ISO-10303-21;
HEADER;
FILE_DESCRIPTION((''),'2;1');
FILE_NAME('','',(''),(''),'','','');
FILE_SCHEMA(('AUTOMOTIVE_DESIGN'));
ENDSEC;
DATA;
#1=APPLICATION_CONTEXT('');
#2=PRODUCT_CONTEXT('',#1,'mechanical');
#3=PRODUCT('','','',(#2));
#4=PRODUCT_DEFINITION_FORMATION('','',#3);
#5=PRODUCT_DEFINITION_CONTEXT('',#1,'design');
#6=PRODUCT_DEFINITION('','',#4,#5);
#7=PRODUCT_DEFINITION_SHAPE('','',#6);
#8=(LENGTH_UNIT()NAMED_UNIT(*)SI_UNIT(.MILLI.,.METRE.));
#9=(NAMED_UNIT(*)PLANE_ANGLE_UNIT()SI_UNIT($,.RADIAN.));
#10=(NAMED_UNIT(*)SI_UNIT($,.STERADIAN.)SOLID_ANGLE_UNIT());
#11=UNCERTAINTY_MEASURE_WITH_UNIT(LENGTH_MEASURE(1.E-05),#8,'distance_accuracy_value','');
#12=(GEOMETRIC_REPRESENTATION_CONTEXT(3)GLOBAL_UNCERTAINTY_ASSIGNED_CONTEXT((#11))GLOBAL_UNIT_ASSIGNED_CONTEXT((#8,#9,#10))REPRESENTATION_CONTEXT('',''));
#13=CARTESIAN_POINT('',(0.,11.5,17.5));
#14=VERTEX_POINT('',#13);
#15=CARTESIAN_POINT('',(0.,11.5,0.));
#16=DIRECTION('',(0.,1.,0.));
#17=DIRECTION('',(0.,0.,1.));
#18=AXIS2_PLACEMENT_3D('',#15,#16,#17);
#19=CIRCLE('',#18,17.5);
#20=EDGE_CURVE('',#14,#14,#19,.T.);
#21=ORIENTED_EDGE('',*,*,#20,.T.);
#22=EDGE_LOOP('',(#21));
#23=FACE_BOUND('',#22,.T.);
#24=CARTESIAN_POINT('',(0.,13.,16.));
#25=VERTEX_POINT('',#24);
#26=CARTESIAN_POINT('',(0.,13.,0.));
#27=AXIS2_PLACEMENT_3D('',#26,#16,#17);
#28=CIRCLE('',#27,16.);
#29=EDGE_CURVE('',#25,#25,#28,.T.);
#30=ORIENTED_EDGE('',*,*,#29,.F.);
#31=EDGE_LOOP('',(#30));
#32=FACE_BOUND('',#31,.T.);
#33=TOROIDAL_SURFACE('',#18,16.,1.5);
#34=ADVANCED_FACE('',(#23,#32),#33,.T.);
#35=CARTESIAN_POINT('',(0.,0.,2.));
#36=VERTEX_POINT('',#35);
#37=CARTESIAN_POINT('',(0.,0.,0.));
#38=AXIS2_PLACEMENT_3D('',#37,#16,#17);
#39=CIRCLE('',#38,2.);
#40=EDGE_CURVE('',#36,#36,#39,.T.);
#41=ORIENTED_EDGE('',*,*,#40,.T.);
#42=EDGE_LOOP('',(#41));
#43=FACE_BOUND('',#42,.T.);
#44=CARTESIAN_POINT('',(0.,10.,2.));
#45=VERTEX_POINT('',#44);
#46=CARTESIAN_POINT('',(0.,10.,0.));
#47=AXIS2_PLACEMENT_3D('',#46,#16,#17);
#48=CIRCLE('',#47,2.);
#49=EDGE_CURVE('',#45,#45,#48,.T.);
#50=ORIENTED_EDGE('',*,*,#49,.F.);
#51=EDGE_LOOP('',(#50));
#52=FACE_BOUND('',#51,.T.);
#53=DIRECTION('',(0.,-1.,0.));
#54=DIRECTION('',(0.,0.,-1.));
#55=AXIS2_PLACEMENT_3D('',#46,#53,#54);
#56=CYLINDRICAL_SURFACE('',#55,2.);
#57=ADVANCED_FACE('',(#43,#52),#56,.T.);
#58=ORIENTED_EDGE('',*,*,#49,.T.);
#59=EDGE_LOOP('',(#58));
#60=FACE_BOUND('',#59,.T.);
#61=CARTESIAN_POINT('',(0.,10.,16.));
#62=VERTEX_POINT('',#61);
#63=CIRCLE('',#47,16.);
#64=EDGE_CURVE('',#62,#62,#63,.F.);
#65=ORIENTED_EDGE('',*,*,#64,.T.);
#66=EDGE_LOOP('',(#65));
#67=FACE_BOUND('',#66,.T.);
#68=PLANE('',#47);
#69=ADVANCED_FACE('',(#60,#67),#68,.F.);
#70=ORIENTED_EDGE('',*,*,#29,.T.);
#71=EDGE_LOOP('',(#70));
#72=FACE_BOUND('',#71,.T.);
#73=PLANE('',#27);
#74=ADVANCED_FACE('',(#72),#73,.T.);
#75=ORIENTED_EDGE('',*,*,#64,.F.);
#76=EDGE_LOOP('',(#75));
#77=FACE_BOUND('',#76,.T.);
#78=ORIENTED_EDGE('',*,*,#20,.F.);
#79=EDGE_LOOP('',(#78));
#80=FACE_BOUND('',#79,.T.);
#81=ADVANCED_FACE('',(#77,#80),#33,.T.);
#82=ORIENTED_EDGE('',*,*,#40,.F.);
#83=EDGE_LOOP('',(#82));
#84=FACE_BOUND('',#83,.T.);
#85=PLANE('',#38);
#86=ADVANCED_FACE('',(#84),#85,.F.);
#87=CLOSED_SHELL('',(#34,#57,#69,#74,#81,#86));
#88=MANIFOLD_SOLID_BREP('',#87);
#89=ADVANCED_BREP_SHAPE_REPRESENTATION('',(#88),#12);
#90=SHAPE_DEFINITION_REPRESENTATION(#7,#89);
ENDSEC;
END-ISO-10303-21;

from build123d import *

# Parameters (mm, degrees)
SKETCH1_R           = 2
BOSS_EXTRUDE1_DEPTH = 10
SKETCH2_R           = 17.5
BOSS_EXTRUDE2_DEPTH = 3
FILLET1_R           = 1.5


with BuildPart() as part:
    # Sketch1 → Boss-Extrude1 (new body)
    with BuildSketch(Plane(origin=(0, 0, 0), x_dir=(1, 0, 0), z_dir=(0, 1, 0))):
        with Locations(Location((0, 0, 0), (0, 0, 270))):
            Circle(SKETCH1_R)
    extrude(amount=BOSS_EXTRUDE1_DEPTH)

    # Sketch2 → Boss-Extrude2 (add)
    with BuildSketch(Plane(origin=(0, 10, 0), x_dir=(1, 0, 0), z_dir=(0, 1, 0))):
        with Locations(Location((0, 0, 0), (0, 0, 270))):
            Circle(SKETCH2_R)
    extrude(amount=BOSS_EXTRUDE2_DEPTH)

    # Fillet1
    fillet1_edges = [part.edges().sort_by_distance(p)[0] for p in [
        (0, 10, -17.5),
        (0, 13, -17.5),
    ]]
    fillet(fillet1_edges, radius=FILLET1_R - 0.0001)  # a hair under: the kernel refuses the full size


solid = part.part
